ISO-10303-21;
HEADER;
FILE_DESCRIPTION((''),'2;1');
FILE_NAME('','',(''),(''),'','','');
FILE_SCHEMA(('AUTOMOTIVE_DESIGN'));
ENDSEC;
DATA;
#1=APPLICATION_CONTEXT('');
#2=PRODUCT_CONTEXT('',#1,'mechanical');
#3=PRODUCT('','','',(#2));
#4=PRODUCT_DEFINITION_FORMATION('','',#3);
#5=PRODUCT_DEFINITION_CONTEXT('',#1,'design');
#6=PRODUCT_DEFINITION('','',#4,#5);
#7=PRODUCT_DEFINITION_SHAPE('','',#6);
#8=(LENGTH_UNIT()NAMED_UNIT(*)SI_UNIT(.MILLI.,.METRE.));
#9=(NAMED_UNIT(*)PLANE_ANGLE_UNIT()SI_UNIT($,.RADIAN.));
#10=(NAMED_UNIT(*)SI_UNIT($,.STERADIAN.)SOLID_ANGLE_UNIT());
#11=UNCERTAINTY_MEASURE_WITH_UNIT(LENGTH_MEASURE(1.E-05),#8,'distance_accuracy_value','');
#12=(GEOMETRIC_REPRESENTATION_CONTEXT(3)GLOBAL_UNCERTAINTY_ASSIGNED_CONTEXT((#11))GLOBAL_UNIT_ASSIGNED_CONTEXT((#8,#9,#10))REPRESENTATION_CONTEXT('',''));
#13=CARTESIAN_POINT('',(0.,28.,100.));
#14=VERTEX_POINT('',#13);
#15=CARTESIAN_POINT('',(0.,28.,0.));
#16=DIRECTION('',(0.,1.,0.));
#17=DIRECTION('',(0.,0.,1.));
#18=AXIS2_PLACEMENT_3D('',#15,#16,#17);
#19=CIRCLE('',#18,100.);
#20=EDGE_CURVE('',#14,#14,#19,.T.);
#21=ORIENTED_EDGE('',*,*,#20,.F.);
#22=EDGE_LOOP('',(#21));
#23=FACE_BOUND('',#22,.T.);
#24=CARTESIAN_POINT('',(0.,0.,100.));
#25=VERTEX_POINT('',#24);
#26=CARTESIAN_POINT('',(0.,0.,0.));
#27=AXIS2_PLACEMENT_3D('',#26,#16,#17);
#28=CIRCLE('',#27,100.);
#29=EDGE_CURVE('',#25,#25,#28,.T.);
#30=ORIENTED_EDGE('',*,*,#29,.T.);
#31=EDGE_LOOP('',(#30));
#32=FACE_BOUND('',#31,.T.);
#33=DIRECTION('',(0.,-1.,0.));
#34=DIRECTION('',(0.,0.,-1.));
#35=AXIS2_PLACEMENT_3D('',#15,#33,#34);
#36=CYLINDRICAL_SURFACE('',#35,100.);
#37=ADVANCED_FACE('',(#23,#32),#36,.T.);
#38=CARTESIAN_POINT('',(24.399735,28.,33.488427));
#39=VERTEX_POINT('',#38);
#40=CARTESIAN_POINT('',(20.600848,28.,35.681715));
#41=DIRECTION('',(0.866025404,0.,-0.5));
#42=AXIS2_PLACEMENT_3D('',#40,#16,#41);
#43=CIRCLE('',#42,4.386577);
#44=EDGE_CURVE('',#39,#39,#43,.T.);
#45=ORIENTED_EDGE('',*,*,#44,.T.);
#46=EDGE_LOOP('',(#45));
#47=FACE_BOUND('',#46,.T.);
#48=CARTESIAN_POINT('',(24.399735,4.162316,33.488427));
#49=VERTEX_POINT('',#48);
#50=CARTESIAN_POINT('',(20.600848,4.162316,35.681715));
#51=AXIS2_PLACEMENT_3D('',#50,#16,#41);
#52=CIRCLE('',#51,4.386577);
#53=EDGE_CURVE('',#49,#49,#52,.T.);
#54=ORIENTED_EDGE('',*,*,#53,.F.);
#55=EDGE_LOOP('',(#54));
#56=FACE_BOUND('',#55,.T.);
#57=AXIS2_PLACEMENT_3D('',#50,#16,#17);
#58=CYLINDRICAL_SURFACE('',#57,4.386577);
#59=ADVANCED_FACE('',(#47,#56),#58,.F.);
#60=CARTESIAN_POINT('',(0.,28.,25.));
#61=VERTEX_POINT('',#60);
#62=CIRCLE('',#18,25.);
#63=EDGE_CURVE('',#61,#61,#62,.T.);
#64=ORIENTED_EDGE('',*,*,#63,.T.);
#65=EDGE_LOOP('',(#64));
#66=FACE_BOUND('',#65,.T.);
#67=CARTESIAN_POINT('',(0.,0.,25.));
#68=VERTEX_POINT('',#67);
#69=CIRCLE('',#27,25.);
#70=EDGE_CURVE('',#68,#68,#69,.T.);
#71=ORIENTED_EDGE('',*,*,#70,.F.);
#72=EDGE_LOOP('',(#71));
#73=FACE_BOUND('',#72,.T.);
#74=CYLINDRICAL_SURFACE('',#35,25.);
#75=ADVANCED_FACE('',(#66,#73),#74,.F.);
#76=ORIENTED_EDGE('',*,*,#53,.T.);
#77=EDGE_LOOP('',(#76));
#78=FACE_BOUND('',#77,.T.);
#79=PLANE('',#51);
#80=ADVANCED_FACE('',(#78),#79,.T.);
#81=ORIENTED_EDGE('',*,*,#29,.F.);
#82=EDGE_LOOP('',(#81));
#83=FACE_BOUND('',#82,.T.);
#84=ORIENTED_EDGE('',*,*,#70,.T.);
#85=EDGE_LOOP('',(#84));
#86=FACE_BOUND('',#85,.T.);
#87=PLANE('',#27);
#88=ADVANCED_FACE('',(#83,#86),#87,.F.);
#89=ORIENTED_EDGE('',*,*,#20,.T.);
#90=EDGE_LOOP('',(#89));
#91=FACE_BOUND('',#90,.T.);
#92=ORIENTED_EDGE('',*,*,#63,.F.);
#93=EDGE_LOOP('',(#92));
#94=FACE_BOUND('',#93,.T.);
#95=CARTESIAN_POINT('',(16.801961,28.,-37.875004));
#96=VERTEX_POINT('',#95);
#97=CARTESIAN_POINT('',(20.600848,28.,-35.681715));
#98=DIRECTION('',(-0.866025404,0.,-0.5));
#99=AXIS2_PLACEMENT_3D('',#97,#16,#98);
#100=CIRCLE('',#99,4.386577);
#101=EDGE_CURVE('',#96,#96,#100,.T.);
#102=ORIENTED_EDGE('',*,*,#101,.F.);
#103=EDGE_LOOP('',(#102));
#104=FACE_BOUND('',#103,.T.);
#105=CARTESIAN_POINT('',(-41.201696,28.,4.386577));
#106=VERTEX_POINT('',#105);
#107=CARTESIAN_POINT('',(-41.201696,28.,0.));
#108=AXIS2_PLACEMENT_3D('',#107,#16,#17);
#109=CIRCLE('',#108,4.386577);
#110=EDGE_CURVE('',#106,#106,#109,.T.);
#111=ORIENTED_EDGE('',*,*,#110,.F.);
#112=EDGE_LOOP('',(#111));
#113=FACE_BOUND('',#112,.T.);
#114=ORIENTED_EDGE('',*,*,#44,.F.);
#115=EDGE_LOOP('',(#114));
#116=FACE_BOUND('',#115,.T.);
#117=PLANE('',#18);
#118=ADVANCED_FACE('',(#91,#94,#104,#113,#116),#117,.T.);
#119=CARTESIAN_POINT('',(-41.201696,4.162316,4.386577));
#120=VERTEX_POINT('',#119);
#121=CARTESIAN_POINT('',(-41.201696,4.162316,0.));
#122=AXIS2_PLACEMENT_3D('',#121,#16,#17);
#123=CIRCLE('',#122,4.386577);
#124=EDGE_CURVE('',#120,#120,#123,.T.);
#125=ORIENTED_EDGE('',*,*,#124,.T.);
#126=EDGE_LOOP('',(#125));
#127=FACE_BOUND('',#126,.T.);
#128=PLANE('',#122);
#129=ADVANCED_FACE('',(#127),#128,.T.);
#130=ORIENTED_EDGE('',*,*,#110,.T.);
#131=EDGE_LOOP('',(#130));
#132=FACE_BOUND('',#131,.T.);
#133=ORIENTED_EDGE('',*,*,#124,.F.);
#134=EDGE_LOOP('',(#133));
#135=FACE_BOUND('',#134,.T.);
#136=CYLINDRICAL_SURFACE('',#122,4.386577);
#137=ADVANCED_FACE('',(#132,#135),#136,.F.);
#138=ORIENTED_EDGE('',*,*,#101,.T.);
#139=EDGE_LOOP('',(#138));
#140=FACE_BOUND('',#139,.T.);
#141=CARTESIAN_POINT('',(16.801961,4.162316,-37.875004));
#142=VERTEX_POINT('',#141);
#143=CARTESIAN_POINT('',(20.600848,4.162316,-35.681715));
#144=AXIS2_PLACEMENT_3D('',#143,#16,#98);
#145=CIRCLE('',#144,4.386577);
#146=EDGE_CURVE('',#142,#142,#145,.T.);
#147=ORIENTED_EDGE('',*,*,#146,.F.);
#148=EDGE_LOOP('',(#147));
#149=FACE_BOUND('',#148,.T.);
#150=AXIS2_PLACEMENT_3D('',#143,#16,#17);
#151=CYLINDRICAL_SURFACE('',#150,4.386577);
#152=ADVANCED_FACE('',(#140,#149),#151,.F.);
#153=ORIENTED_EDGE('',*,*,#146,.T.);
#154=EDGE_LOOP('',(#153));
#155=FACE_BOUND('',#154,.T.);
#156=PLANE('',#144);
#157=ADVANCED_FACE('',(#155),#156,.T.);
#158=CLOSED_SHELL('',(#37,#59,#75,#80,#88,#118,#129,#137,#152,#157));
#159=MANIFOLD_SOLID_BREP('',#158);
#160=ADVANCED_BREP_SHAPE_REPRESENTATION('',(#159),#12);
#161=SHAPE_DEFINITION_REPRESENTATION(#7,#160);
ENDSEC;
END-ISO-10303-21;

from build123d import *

# Parameters (mm, degrees)
SKETCH1_R           = 100
BOSS_EXTRUDE1_DEPTH = 28
SKETCH2_R           = 25
CUT_EXTRUDE1_DEPTH  = 145.166570328
SKETCH3_R           = 4.386577005
CUT_EXTRUDE2_DEPTH  = 23.837684128
CIRPATTERN1_COUNT   = 3


with BuildPart() as part:
    # Sketch1 → Boss-Extrude1 (new body)
    with BuildSketch(Plane(origin=(0, 0, 0), x_dir=(1, 0, 0), z_dir=(0, 1, 0))):
        Circle(SKETCH1_R)
    extrude(amount=BOSS_EXTRUDE1_DEPTH)

    # Sketch2 → Cut-Extrude1 (cut, through all)
    with BuildSketch(Plane(origin=(0, 0, 0), x_dir=(1, 0, 0), z_dir=(0, 1, 0))):
        Circle(SKETCH2_R)
    extrude(amount=CUT_EXTRUDE1_DEPTH, mode=Mode.SUBTRACT)

    # Sketch3 → Cut-Extrude2 (cut)
    with BuildSketch(Plane(origin=(0, 28, 0), x_dir=(1, 0, 0), z_dir=(0, 1, 0))):
        with Locations((-41.201695718, 0)):
            Circle(SKETCH3_R)
    cut_extrude2 = extrude(amount=-CUT_EXTRUDE2_DEPTH, mode=Mode.SUBTRACT)

    # CirPattern1: Cut-Extrude2 ×3 about axis
    cirpattern1_axis = Axis((0, 0, 0), (0, 1, 0))
    for i in range(1, CIRPATTERN1_COUNT):
        add(cut_extrude2.rotate(cirpattern1_axis, i * 360 / CIRPATTERN1_COUNT), mode=Mode.SUBTRACT)


solid = part.part
